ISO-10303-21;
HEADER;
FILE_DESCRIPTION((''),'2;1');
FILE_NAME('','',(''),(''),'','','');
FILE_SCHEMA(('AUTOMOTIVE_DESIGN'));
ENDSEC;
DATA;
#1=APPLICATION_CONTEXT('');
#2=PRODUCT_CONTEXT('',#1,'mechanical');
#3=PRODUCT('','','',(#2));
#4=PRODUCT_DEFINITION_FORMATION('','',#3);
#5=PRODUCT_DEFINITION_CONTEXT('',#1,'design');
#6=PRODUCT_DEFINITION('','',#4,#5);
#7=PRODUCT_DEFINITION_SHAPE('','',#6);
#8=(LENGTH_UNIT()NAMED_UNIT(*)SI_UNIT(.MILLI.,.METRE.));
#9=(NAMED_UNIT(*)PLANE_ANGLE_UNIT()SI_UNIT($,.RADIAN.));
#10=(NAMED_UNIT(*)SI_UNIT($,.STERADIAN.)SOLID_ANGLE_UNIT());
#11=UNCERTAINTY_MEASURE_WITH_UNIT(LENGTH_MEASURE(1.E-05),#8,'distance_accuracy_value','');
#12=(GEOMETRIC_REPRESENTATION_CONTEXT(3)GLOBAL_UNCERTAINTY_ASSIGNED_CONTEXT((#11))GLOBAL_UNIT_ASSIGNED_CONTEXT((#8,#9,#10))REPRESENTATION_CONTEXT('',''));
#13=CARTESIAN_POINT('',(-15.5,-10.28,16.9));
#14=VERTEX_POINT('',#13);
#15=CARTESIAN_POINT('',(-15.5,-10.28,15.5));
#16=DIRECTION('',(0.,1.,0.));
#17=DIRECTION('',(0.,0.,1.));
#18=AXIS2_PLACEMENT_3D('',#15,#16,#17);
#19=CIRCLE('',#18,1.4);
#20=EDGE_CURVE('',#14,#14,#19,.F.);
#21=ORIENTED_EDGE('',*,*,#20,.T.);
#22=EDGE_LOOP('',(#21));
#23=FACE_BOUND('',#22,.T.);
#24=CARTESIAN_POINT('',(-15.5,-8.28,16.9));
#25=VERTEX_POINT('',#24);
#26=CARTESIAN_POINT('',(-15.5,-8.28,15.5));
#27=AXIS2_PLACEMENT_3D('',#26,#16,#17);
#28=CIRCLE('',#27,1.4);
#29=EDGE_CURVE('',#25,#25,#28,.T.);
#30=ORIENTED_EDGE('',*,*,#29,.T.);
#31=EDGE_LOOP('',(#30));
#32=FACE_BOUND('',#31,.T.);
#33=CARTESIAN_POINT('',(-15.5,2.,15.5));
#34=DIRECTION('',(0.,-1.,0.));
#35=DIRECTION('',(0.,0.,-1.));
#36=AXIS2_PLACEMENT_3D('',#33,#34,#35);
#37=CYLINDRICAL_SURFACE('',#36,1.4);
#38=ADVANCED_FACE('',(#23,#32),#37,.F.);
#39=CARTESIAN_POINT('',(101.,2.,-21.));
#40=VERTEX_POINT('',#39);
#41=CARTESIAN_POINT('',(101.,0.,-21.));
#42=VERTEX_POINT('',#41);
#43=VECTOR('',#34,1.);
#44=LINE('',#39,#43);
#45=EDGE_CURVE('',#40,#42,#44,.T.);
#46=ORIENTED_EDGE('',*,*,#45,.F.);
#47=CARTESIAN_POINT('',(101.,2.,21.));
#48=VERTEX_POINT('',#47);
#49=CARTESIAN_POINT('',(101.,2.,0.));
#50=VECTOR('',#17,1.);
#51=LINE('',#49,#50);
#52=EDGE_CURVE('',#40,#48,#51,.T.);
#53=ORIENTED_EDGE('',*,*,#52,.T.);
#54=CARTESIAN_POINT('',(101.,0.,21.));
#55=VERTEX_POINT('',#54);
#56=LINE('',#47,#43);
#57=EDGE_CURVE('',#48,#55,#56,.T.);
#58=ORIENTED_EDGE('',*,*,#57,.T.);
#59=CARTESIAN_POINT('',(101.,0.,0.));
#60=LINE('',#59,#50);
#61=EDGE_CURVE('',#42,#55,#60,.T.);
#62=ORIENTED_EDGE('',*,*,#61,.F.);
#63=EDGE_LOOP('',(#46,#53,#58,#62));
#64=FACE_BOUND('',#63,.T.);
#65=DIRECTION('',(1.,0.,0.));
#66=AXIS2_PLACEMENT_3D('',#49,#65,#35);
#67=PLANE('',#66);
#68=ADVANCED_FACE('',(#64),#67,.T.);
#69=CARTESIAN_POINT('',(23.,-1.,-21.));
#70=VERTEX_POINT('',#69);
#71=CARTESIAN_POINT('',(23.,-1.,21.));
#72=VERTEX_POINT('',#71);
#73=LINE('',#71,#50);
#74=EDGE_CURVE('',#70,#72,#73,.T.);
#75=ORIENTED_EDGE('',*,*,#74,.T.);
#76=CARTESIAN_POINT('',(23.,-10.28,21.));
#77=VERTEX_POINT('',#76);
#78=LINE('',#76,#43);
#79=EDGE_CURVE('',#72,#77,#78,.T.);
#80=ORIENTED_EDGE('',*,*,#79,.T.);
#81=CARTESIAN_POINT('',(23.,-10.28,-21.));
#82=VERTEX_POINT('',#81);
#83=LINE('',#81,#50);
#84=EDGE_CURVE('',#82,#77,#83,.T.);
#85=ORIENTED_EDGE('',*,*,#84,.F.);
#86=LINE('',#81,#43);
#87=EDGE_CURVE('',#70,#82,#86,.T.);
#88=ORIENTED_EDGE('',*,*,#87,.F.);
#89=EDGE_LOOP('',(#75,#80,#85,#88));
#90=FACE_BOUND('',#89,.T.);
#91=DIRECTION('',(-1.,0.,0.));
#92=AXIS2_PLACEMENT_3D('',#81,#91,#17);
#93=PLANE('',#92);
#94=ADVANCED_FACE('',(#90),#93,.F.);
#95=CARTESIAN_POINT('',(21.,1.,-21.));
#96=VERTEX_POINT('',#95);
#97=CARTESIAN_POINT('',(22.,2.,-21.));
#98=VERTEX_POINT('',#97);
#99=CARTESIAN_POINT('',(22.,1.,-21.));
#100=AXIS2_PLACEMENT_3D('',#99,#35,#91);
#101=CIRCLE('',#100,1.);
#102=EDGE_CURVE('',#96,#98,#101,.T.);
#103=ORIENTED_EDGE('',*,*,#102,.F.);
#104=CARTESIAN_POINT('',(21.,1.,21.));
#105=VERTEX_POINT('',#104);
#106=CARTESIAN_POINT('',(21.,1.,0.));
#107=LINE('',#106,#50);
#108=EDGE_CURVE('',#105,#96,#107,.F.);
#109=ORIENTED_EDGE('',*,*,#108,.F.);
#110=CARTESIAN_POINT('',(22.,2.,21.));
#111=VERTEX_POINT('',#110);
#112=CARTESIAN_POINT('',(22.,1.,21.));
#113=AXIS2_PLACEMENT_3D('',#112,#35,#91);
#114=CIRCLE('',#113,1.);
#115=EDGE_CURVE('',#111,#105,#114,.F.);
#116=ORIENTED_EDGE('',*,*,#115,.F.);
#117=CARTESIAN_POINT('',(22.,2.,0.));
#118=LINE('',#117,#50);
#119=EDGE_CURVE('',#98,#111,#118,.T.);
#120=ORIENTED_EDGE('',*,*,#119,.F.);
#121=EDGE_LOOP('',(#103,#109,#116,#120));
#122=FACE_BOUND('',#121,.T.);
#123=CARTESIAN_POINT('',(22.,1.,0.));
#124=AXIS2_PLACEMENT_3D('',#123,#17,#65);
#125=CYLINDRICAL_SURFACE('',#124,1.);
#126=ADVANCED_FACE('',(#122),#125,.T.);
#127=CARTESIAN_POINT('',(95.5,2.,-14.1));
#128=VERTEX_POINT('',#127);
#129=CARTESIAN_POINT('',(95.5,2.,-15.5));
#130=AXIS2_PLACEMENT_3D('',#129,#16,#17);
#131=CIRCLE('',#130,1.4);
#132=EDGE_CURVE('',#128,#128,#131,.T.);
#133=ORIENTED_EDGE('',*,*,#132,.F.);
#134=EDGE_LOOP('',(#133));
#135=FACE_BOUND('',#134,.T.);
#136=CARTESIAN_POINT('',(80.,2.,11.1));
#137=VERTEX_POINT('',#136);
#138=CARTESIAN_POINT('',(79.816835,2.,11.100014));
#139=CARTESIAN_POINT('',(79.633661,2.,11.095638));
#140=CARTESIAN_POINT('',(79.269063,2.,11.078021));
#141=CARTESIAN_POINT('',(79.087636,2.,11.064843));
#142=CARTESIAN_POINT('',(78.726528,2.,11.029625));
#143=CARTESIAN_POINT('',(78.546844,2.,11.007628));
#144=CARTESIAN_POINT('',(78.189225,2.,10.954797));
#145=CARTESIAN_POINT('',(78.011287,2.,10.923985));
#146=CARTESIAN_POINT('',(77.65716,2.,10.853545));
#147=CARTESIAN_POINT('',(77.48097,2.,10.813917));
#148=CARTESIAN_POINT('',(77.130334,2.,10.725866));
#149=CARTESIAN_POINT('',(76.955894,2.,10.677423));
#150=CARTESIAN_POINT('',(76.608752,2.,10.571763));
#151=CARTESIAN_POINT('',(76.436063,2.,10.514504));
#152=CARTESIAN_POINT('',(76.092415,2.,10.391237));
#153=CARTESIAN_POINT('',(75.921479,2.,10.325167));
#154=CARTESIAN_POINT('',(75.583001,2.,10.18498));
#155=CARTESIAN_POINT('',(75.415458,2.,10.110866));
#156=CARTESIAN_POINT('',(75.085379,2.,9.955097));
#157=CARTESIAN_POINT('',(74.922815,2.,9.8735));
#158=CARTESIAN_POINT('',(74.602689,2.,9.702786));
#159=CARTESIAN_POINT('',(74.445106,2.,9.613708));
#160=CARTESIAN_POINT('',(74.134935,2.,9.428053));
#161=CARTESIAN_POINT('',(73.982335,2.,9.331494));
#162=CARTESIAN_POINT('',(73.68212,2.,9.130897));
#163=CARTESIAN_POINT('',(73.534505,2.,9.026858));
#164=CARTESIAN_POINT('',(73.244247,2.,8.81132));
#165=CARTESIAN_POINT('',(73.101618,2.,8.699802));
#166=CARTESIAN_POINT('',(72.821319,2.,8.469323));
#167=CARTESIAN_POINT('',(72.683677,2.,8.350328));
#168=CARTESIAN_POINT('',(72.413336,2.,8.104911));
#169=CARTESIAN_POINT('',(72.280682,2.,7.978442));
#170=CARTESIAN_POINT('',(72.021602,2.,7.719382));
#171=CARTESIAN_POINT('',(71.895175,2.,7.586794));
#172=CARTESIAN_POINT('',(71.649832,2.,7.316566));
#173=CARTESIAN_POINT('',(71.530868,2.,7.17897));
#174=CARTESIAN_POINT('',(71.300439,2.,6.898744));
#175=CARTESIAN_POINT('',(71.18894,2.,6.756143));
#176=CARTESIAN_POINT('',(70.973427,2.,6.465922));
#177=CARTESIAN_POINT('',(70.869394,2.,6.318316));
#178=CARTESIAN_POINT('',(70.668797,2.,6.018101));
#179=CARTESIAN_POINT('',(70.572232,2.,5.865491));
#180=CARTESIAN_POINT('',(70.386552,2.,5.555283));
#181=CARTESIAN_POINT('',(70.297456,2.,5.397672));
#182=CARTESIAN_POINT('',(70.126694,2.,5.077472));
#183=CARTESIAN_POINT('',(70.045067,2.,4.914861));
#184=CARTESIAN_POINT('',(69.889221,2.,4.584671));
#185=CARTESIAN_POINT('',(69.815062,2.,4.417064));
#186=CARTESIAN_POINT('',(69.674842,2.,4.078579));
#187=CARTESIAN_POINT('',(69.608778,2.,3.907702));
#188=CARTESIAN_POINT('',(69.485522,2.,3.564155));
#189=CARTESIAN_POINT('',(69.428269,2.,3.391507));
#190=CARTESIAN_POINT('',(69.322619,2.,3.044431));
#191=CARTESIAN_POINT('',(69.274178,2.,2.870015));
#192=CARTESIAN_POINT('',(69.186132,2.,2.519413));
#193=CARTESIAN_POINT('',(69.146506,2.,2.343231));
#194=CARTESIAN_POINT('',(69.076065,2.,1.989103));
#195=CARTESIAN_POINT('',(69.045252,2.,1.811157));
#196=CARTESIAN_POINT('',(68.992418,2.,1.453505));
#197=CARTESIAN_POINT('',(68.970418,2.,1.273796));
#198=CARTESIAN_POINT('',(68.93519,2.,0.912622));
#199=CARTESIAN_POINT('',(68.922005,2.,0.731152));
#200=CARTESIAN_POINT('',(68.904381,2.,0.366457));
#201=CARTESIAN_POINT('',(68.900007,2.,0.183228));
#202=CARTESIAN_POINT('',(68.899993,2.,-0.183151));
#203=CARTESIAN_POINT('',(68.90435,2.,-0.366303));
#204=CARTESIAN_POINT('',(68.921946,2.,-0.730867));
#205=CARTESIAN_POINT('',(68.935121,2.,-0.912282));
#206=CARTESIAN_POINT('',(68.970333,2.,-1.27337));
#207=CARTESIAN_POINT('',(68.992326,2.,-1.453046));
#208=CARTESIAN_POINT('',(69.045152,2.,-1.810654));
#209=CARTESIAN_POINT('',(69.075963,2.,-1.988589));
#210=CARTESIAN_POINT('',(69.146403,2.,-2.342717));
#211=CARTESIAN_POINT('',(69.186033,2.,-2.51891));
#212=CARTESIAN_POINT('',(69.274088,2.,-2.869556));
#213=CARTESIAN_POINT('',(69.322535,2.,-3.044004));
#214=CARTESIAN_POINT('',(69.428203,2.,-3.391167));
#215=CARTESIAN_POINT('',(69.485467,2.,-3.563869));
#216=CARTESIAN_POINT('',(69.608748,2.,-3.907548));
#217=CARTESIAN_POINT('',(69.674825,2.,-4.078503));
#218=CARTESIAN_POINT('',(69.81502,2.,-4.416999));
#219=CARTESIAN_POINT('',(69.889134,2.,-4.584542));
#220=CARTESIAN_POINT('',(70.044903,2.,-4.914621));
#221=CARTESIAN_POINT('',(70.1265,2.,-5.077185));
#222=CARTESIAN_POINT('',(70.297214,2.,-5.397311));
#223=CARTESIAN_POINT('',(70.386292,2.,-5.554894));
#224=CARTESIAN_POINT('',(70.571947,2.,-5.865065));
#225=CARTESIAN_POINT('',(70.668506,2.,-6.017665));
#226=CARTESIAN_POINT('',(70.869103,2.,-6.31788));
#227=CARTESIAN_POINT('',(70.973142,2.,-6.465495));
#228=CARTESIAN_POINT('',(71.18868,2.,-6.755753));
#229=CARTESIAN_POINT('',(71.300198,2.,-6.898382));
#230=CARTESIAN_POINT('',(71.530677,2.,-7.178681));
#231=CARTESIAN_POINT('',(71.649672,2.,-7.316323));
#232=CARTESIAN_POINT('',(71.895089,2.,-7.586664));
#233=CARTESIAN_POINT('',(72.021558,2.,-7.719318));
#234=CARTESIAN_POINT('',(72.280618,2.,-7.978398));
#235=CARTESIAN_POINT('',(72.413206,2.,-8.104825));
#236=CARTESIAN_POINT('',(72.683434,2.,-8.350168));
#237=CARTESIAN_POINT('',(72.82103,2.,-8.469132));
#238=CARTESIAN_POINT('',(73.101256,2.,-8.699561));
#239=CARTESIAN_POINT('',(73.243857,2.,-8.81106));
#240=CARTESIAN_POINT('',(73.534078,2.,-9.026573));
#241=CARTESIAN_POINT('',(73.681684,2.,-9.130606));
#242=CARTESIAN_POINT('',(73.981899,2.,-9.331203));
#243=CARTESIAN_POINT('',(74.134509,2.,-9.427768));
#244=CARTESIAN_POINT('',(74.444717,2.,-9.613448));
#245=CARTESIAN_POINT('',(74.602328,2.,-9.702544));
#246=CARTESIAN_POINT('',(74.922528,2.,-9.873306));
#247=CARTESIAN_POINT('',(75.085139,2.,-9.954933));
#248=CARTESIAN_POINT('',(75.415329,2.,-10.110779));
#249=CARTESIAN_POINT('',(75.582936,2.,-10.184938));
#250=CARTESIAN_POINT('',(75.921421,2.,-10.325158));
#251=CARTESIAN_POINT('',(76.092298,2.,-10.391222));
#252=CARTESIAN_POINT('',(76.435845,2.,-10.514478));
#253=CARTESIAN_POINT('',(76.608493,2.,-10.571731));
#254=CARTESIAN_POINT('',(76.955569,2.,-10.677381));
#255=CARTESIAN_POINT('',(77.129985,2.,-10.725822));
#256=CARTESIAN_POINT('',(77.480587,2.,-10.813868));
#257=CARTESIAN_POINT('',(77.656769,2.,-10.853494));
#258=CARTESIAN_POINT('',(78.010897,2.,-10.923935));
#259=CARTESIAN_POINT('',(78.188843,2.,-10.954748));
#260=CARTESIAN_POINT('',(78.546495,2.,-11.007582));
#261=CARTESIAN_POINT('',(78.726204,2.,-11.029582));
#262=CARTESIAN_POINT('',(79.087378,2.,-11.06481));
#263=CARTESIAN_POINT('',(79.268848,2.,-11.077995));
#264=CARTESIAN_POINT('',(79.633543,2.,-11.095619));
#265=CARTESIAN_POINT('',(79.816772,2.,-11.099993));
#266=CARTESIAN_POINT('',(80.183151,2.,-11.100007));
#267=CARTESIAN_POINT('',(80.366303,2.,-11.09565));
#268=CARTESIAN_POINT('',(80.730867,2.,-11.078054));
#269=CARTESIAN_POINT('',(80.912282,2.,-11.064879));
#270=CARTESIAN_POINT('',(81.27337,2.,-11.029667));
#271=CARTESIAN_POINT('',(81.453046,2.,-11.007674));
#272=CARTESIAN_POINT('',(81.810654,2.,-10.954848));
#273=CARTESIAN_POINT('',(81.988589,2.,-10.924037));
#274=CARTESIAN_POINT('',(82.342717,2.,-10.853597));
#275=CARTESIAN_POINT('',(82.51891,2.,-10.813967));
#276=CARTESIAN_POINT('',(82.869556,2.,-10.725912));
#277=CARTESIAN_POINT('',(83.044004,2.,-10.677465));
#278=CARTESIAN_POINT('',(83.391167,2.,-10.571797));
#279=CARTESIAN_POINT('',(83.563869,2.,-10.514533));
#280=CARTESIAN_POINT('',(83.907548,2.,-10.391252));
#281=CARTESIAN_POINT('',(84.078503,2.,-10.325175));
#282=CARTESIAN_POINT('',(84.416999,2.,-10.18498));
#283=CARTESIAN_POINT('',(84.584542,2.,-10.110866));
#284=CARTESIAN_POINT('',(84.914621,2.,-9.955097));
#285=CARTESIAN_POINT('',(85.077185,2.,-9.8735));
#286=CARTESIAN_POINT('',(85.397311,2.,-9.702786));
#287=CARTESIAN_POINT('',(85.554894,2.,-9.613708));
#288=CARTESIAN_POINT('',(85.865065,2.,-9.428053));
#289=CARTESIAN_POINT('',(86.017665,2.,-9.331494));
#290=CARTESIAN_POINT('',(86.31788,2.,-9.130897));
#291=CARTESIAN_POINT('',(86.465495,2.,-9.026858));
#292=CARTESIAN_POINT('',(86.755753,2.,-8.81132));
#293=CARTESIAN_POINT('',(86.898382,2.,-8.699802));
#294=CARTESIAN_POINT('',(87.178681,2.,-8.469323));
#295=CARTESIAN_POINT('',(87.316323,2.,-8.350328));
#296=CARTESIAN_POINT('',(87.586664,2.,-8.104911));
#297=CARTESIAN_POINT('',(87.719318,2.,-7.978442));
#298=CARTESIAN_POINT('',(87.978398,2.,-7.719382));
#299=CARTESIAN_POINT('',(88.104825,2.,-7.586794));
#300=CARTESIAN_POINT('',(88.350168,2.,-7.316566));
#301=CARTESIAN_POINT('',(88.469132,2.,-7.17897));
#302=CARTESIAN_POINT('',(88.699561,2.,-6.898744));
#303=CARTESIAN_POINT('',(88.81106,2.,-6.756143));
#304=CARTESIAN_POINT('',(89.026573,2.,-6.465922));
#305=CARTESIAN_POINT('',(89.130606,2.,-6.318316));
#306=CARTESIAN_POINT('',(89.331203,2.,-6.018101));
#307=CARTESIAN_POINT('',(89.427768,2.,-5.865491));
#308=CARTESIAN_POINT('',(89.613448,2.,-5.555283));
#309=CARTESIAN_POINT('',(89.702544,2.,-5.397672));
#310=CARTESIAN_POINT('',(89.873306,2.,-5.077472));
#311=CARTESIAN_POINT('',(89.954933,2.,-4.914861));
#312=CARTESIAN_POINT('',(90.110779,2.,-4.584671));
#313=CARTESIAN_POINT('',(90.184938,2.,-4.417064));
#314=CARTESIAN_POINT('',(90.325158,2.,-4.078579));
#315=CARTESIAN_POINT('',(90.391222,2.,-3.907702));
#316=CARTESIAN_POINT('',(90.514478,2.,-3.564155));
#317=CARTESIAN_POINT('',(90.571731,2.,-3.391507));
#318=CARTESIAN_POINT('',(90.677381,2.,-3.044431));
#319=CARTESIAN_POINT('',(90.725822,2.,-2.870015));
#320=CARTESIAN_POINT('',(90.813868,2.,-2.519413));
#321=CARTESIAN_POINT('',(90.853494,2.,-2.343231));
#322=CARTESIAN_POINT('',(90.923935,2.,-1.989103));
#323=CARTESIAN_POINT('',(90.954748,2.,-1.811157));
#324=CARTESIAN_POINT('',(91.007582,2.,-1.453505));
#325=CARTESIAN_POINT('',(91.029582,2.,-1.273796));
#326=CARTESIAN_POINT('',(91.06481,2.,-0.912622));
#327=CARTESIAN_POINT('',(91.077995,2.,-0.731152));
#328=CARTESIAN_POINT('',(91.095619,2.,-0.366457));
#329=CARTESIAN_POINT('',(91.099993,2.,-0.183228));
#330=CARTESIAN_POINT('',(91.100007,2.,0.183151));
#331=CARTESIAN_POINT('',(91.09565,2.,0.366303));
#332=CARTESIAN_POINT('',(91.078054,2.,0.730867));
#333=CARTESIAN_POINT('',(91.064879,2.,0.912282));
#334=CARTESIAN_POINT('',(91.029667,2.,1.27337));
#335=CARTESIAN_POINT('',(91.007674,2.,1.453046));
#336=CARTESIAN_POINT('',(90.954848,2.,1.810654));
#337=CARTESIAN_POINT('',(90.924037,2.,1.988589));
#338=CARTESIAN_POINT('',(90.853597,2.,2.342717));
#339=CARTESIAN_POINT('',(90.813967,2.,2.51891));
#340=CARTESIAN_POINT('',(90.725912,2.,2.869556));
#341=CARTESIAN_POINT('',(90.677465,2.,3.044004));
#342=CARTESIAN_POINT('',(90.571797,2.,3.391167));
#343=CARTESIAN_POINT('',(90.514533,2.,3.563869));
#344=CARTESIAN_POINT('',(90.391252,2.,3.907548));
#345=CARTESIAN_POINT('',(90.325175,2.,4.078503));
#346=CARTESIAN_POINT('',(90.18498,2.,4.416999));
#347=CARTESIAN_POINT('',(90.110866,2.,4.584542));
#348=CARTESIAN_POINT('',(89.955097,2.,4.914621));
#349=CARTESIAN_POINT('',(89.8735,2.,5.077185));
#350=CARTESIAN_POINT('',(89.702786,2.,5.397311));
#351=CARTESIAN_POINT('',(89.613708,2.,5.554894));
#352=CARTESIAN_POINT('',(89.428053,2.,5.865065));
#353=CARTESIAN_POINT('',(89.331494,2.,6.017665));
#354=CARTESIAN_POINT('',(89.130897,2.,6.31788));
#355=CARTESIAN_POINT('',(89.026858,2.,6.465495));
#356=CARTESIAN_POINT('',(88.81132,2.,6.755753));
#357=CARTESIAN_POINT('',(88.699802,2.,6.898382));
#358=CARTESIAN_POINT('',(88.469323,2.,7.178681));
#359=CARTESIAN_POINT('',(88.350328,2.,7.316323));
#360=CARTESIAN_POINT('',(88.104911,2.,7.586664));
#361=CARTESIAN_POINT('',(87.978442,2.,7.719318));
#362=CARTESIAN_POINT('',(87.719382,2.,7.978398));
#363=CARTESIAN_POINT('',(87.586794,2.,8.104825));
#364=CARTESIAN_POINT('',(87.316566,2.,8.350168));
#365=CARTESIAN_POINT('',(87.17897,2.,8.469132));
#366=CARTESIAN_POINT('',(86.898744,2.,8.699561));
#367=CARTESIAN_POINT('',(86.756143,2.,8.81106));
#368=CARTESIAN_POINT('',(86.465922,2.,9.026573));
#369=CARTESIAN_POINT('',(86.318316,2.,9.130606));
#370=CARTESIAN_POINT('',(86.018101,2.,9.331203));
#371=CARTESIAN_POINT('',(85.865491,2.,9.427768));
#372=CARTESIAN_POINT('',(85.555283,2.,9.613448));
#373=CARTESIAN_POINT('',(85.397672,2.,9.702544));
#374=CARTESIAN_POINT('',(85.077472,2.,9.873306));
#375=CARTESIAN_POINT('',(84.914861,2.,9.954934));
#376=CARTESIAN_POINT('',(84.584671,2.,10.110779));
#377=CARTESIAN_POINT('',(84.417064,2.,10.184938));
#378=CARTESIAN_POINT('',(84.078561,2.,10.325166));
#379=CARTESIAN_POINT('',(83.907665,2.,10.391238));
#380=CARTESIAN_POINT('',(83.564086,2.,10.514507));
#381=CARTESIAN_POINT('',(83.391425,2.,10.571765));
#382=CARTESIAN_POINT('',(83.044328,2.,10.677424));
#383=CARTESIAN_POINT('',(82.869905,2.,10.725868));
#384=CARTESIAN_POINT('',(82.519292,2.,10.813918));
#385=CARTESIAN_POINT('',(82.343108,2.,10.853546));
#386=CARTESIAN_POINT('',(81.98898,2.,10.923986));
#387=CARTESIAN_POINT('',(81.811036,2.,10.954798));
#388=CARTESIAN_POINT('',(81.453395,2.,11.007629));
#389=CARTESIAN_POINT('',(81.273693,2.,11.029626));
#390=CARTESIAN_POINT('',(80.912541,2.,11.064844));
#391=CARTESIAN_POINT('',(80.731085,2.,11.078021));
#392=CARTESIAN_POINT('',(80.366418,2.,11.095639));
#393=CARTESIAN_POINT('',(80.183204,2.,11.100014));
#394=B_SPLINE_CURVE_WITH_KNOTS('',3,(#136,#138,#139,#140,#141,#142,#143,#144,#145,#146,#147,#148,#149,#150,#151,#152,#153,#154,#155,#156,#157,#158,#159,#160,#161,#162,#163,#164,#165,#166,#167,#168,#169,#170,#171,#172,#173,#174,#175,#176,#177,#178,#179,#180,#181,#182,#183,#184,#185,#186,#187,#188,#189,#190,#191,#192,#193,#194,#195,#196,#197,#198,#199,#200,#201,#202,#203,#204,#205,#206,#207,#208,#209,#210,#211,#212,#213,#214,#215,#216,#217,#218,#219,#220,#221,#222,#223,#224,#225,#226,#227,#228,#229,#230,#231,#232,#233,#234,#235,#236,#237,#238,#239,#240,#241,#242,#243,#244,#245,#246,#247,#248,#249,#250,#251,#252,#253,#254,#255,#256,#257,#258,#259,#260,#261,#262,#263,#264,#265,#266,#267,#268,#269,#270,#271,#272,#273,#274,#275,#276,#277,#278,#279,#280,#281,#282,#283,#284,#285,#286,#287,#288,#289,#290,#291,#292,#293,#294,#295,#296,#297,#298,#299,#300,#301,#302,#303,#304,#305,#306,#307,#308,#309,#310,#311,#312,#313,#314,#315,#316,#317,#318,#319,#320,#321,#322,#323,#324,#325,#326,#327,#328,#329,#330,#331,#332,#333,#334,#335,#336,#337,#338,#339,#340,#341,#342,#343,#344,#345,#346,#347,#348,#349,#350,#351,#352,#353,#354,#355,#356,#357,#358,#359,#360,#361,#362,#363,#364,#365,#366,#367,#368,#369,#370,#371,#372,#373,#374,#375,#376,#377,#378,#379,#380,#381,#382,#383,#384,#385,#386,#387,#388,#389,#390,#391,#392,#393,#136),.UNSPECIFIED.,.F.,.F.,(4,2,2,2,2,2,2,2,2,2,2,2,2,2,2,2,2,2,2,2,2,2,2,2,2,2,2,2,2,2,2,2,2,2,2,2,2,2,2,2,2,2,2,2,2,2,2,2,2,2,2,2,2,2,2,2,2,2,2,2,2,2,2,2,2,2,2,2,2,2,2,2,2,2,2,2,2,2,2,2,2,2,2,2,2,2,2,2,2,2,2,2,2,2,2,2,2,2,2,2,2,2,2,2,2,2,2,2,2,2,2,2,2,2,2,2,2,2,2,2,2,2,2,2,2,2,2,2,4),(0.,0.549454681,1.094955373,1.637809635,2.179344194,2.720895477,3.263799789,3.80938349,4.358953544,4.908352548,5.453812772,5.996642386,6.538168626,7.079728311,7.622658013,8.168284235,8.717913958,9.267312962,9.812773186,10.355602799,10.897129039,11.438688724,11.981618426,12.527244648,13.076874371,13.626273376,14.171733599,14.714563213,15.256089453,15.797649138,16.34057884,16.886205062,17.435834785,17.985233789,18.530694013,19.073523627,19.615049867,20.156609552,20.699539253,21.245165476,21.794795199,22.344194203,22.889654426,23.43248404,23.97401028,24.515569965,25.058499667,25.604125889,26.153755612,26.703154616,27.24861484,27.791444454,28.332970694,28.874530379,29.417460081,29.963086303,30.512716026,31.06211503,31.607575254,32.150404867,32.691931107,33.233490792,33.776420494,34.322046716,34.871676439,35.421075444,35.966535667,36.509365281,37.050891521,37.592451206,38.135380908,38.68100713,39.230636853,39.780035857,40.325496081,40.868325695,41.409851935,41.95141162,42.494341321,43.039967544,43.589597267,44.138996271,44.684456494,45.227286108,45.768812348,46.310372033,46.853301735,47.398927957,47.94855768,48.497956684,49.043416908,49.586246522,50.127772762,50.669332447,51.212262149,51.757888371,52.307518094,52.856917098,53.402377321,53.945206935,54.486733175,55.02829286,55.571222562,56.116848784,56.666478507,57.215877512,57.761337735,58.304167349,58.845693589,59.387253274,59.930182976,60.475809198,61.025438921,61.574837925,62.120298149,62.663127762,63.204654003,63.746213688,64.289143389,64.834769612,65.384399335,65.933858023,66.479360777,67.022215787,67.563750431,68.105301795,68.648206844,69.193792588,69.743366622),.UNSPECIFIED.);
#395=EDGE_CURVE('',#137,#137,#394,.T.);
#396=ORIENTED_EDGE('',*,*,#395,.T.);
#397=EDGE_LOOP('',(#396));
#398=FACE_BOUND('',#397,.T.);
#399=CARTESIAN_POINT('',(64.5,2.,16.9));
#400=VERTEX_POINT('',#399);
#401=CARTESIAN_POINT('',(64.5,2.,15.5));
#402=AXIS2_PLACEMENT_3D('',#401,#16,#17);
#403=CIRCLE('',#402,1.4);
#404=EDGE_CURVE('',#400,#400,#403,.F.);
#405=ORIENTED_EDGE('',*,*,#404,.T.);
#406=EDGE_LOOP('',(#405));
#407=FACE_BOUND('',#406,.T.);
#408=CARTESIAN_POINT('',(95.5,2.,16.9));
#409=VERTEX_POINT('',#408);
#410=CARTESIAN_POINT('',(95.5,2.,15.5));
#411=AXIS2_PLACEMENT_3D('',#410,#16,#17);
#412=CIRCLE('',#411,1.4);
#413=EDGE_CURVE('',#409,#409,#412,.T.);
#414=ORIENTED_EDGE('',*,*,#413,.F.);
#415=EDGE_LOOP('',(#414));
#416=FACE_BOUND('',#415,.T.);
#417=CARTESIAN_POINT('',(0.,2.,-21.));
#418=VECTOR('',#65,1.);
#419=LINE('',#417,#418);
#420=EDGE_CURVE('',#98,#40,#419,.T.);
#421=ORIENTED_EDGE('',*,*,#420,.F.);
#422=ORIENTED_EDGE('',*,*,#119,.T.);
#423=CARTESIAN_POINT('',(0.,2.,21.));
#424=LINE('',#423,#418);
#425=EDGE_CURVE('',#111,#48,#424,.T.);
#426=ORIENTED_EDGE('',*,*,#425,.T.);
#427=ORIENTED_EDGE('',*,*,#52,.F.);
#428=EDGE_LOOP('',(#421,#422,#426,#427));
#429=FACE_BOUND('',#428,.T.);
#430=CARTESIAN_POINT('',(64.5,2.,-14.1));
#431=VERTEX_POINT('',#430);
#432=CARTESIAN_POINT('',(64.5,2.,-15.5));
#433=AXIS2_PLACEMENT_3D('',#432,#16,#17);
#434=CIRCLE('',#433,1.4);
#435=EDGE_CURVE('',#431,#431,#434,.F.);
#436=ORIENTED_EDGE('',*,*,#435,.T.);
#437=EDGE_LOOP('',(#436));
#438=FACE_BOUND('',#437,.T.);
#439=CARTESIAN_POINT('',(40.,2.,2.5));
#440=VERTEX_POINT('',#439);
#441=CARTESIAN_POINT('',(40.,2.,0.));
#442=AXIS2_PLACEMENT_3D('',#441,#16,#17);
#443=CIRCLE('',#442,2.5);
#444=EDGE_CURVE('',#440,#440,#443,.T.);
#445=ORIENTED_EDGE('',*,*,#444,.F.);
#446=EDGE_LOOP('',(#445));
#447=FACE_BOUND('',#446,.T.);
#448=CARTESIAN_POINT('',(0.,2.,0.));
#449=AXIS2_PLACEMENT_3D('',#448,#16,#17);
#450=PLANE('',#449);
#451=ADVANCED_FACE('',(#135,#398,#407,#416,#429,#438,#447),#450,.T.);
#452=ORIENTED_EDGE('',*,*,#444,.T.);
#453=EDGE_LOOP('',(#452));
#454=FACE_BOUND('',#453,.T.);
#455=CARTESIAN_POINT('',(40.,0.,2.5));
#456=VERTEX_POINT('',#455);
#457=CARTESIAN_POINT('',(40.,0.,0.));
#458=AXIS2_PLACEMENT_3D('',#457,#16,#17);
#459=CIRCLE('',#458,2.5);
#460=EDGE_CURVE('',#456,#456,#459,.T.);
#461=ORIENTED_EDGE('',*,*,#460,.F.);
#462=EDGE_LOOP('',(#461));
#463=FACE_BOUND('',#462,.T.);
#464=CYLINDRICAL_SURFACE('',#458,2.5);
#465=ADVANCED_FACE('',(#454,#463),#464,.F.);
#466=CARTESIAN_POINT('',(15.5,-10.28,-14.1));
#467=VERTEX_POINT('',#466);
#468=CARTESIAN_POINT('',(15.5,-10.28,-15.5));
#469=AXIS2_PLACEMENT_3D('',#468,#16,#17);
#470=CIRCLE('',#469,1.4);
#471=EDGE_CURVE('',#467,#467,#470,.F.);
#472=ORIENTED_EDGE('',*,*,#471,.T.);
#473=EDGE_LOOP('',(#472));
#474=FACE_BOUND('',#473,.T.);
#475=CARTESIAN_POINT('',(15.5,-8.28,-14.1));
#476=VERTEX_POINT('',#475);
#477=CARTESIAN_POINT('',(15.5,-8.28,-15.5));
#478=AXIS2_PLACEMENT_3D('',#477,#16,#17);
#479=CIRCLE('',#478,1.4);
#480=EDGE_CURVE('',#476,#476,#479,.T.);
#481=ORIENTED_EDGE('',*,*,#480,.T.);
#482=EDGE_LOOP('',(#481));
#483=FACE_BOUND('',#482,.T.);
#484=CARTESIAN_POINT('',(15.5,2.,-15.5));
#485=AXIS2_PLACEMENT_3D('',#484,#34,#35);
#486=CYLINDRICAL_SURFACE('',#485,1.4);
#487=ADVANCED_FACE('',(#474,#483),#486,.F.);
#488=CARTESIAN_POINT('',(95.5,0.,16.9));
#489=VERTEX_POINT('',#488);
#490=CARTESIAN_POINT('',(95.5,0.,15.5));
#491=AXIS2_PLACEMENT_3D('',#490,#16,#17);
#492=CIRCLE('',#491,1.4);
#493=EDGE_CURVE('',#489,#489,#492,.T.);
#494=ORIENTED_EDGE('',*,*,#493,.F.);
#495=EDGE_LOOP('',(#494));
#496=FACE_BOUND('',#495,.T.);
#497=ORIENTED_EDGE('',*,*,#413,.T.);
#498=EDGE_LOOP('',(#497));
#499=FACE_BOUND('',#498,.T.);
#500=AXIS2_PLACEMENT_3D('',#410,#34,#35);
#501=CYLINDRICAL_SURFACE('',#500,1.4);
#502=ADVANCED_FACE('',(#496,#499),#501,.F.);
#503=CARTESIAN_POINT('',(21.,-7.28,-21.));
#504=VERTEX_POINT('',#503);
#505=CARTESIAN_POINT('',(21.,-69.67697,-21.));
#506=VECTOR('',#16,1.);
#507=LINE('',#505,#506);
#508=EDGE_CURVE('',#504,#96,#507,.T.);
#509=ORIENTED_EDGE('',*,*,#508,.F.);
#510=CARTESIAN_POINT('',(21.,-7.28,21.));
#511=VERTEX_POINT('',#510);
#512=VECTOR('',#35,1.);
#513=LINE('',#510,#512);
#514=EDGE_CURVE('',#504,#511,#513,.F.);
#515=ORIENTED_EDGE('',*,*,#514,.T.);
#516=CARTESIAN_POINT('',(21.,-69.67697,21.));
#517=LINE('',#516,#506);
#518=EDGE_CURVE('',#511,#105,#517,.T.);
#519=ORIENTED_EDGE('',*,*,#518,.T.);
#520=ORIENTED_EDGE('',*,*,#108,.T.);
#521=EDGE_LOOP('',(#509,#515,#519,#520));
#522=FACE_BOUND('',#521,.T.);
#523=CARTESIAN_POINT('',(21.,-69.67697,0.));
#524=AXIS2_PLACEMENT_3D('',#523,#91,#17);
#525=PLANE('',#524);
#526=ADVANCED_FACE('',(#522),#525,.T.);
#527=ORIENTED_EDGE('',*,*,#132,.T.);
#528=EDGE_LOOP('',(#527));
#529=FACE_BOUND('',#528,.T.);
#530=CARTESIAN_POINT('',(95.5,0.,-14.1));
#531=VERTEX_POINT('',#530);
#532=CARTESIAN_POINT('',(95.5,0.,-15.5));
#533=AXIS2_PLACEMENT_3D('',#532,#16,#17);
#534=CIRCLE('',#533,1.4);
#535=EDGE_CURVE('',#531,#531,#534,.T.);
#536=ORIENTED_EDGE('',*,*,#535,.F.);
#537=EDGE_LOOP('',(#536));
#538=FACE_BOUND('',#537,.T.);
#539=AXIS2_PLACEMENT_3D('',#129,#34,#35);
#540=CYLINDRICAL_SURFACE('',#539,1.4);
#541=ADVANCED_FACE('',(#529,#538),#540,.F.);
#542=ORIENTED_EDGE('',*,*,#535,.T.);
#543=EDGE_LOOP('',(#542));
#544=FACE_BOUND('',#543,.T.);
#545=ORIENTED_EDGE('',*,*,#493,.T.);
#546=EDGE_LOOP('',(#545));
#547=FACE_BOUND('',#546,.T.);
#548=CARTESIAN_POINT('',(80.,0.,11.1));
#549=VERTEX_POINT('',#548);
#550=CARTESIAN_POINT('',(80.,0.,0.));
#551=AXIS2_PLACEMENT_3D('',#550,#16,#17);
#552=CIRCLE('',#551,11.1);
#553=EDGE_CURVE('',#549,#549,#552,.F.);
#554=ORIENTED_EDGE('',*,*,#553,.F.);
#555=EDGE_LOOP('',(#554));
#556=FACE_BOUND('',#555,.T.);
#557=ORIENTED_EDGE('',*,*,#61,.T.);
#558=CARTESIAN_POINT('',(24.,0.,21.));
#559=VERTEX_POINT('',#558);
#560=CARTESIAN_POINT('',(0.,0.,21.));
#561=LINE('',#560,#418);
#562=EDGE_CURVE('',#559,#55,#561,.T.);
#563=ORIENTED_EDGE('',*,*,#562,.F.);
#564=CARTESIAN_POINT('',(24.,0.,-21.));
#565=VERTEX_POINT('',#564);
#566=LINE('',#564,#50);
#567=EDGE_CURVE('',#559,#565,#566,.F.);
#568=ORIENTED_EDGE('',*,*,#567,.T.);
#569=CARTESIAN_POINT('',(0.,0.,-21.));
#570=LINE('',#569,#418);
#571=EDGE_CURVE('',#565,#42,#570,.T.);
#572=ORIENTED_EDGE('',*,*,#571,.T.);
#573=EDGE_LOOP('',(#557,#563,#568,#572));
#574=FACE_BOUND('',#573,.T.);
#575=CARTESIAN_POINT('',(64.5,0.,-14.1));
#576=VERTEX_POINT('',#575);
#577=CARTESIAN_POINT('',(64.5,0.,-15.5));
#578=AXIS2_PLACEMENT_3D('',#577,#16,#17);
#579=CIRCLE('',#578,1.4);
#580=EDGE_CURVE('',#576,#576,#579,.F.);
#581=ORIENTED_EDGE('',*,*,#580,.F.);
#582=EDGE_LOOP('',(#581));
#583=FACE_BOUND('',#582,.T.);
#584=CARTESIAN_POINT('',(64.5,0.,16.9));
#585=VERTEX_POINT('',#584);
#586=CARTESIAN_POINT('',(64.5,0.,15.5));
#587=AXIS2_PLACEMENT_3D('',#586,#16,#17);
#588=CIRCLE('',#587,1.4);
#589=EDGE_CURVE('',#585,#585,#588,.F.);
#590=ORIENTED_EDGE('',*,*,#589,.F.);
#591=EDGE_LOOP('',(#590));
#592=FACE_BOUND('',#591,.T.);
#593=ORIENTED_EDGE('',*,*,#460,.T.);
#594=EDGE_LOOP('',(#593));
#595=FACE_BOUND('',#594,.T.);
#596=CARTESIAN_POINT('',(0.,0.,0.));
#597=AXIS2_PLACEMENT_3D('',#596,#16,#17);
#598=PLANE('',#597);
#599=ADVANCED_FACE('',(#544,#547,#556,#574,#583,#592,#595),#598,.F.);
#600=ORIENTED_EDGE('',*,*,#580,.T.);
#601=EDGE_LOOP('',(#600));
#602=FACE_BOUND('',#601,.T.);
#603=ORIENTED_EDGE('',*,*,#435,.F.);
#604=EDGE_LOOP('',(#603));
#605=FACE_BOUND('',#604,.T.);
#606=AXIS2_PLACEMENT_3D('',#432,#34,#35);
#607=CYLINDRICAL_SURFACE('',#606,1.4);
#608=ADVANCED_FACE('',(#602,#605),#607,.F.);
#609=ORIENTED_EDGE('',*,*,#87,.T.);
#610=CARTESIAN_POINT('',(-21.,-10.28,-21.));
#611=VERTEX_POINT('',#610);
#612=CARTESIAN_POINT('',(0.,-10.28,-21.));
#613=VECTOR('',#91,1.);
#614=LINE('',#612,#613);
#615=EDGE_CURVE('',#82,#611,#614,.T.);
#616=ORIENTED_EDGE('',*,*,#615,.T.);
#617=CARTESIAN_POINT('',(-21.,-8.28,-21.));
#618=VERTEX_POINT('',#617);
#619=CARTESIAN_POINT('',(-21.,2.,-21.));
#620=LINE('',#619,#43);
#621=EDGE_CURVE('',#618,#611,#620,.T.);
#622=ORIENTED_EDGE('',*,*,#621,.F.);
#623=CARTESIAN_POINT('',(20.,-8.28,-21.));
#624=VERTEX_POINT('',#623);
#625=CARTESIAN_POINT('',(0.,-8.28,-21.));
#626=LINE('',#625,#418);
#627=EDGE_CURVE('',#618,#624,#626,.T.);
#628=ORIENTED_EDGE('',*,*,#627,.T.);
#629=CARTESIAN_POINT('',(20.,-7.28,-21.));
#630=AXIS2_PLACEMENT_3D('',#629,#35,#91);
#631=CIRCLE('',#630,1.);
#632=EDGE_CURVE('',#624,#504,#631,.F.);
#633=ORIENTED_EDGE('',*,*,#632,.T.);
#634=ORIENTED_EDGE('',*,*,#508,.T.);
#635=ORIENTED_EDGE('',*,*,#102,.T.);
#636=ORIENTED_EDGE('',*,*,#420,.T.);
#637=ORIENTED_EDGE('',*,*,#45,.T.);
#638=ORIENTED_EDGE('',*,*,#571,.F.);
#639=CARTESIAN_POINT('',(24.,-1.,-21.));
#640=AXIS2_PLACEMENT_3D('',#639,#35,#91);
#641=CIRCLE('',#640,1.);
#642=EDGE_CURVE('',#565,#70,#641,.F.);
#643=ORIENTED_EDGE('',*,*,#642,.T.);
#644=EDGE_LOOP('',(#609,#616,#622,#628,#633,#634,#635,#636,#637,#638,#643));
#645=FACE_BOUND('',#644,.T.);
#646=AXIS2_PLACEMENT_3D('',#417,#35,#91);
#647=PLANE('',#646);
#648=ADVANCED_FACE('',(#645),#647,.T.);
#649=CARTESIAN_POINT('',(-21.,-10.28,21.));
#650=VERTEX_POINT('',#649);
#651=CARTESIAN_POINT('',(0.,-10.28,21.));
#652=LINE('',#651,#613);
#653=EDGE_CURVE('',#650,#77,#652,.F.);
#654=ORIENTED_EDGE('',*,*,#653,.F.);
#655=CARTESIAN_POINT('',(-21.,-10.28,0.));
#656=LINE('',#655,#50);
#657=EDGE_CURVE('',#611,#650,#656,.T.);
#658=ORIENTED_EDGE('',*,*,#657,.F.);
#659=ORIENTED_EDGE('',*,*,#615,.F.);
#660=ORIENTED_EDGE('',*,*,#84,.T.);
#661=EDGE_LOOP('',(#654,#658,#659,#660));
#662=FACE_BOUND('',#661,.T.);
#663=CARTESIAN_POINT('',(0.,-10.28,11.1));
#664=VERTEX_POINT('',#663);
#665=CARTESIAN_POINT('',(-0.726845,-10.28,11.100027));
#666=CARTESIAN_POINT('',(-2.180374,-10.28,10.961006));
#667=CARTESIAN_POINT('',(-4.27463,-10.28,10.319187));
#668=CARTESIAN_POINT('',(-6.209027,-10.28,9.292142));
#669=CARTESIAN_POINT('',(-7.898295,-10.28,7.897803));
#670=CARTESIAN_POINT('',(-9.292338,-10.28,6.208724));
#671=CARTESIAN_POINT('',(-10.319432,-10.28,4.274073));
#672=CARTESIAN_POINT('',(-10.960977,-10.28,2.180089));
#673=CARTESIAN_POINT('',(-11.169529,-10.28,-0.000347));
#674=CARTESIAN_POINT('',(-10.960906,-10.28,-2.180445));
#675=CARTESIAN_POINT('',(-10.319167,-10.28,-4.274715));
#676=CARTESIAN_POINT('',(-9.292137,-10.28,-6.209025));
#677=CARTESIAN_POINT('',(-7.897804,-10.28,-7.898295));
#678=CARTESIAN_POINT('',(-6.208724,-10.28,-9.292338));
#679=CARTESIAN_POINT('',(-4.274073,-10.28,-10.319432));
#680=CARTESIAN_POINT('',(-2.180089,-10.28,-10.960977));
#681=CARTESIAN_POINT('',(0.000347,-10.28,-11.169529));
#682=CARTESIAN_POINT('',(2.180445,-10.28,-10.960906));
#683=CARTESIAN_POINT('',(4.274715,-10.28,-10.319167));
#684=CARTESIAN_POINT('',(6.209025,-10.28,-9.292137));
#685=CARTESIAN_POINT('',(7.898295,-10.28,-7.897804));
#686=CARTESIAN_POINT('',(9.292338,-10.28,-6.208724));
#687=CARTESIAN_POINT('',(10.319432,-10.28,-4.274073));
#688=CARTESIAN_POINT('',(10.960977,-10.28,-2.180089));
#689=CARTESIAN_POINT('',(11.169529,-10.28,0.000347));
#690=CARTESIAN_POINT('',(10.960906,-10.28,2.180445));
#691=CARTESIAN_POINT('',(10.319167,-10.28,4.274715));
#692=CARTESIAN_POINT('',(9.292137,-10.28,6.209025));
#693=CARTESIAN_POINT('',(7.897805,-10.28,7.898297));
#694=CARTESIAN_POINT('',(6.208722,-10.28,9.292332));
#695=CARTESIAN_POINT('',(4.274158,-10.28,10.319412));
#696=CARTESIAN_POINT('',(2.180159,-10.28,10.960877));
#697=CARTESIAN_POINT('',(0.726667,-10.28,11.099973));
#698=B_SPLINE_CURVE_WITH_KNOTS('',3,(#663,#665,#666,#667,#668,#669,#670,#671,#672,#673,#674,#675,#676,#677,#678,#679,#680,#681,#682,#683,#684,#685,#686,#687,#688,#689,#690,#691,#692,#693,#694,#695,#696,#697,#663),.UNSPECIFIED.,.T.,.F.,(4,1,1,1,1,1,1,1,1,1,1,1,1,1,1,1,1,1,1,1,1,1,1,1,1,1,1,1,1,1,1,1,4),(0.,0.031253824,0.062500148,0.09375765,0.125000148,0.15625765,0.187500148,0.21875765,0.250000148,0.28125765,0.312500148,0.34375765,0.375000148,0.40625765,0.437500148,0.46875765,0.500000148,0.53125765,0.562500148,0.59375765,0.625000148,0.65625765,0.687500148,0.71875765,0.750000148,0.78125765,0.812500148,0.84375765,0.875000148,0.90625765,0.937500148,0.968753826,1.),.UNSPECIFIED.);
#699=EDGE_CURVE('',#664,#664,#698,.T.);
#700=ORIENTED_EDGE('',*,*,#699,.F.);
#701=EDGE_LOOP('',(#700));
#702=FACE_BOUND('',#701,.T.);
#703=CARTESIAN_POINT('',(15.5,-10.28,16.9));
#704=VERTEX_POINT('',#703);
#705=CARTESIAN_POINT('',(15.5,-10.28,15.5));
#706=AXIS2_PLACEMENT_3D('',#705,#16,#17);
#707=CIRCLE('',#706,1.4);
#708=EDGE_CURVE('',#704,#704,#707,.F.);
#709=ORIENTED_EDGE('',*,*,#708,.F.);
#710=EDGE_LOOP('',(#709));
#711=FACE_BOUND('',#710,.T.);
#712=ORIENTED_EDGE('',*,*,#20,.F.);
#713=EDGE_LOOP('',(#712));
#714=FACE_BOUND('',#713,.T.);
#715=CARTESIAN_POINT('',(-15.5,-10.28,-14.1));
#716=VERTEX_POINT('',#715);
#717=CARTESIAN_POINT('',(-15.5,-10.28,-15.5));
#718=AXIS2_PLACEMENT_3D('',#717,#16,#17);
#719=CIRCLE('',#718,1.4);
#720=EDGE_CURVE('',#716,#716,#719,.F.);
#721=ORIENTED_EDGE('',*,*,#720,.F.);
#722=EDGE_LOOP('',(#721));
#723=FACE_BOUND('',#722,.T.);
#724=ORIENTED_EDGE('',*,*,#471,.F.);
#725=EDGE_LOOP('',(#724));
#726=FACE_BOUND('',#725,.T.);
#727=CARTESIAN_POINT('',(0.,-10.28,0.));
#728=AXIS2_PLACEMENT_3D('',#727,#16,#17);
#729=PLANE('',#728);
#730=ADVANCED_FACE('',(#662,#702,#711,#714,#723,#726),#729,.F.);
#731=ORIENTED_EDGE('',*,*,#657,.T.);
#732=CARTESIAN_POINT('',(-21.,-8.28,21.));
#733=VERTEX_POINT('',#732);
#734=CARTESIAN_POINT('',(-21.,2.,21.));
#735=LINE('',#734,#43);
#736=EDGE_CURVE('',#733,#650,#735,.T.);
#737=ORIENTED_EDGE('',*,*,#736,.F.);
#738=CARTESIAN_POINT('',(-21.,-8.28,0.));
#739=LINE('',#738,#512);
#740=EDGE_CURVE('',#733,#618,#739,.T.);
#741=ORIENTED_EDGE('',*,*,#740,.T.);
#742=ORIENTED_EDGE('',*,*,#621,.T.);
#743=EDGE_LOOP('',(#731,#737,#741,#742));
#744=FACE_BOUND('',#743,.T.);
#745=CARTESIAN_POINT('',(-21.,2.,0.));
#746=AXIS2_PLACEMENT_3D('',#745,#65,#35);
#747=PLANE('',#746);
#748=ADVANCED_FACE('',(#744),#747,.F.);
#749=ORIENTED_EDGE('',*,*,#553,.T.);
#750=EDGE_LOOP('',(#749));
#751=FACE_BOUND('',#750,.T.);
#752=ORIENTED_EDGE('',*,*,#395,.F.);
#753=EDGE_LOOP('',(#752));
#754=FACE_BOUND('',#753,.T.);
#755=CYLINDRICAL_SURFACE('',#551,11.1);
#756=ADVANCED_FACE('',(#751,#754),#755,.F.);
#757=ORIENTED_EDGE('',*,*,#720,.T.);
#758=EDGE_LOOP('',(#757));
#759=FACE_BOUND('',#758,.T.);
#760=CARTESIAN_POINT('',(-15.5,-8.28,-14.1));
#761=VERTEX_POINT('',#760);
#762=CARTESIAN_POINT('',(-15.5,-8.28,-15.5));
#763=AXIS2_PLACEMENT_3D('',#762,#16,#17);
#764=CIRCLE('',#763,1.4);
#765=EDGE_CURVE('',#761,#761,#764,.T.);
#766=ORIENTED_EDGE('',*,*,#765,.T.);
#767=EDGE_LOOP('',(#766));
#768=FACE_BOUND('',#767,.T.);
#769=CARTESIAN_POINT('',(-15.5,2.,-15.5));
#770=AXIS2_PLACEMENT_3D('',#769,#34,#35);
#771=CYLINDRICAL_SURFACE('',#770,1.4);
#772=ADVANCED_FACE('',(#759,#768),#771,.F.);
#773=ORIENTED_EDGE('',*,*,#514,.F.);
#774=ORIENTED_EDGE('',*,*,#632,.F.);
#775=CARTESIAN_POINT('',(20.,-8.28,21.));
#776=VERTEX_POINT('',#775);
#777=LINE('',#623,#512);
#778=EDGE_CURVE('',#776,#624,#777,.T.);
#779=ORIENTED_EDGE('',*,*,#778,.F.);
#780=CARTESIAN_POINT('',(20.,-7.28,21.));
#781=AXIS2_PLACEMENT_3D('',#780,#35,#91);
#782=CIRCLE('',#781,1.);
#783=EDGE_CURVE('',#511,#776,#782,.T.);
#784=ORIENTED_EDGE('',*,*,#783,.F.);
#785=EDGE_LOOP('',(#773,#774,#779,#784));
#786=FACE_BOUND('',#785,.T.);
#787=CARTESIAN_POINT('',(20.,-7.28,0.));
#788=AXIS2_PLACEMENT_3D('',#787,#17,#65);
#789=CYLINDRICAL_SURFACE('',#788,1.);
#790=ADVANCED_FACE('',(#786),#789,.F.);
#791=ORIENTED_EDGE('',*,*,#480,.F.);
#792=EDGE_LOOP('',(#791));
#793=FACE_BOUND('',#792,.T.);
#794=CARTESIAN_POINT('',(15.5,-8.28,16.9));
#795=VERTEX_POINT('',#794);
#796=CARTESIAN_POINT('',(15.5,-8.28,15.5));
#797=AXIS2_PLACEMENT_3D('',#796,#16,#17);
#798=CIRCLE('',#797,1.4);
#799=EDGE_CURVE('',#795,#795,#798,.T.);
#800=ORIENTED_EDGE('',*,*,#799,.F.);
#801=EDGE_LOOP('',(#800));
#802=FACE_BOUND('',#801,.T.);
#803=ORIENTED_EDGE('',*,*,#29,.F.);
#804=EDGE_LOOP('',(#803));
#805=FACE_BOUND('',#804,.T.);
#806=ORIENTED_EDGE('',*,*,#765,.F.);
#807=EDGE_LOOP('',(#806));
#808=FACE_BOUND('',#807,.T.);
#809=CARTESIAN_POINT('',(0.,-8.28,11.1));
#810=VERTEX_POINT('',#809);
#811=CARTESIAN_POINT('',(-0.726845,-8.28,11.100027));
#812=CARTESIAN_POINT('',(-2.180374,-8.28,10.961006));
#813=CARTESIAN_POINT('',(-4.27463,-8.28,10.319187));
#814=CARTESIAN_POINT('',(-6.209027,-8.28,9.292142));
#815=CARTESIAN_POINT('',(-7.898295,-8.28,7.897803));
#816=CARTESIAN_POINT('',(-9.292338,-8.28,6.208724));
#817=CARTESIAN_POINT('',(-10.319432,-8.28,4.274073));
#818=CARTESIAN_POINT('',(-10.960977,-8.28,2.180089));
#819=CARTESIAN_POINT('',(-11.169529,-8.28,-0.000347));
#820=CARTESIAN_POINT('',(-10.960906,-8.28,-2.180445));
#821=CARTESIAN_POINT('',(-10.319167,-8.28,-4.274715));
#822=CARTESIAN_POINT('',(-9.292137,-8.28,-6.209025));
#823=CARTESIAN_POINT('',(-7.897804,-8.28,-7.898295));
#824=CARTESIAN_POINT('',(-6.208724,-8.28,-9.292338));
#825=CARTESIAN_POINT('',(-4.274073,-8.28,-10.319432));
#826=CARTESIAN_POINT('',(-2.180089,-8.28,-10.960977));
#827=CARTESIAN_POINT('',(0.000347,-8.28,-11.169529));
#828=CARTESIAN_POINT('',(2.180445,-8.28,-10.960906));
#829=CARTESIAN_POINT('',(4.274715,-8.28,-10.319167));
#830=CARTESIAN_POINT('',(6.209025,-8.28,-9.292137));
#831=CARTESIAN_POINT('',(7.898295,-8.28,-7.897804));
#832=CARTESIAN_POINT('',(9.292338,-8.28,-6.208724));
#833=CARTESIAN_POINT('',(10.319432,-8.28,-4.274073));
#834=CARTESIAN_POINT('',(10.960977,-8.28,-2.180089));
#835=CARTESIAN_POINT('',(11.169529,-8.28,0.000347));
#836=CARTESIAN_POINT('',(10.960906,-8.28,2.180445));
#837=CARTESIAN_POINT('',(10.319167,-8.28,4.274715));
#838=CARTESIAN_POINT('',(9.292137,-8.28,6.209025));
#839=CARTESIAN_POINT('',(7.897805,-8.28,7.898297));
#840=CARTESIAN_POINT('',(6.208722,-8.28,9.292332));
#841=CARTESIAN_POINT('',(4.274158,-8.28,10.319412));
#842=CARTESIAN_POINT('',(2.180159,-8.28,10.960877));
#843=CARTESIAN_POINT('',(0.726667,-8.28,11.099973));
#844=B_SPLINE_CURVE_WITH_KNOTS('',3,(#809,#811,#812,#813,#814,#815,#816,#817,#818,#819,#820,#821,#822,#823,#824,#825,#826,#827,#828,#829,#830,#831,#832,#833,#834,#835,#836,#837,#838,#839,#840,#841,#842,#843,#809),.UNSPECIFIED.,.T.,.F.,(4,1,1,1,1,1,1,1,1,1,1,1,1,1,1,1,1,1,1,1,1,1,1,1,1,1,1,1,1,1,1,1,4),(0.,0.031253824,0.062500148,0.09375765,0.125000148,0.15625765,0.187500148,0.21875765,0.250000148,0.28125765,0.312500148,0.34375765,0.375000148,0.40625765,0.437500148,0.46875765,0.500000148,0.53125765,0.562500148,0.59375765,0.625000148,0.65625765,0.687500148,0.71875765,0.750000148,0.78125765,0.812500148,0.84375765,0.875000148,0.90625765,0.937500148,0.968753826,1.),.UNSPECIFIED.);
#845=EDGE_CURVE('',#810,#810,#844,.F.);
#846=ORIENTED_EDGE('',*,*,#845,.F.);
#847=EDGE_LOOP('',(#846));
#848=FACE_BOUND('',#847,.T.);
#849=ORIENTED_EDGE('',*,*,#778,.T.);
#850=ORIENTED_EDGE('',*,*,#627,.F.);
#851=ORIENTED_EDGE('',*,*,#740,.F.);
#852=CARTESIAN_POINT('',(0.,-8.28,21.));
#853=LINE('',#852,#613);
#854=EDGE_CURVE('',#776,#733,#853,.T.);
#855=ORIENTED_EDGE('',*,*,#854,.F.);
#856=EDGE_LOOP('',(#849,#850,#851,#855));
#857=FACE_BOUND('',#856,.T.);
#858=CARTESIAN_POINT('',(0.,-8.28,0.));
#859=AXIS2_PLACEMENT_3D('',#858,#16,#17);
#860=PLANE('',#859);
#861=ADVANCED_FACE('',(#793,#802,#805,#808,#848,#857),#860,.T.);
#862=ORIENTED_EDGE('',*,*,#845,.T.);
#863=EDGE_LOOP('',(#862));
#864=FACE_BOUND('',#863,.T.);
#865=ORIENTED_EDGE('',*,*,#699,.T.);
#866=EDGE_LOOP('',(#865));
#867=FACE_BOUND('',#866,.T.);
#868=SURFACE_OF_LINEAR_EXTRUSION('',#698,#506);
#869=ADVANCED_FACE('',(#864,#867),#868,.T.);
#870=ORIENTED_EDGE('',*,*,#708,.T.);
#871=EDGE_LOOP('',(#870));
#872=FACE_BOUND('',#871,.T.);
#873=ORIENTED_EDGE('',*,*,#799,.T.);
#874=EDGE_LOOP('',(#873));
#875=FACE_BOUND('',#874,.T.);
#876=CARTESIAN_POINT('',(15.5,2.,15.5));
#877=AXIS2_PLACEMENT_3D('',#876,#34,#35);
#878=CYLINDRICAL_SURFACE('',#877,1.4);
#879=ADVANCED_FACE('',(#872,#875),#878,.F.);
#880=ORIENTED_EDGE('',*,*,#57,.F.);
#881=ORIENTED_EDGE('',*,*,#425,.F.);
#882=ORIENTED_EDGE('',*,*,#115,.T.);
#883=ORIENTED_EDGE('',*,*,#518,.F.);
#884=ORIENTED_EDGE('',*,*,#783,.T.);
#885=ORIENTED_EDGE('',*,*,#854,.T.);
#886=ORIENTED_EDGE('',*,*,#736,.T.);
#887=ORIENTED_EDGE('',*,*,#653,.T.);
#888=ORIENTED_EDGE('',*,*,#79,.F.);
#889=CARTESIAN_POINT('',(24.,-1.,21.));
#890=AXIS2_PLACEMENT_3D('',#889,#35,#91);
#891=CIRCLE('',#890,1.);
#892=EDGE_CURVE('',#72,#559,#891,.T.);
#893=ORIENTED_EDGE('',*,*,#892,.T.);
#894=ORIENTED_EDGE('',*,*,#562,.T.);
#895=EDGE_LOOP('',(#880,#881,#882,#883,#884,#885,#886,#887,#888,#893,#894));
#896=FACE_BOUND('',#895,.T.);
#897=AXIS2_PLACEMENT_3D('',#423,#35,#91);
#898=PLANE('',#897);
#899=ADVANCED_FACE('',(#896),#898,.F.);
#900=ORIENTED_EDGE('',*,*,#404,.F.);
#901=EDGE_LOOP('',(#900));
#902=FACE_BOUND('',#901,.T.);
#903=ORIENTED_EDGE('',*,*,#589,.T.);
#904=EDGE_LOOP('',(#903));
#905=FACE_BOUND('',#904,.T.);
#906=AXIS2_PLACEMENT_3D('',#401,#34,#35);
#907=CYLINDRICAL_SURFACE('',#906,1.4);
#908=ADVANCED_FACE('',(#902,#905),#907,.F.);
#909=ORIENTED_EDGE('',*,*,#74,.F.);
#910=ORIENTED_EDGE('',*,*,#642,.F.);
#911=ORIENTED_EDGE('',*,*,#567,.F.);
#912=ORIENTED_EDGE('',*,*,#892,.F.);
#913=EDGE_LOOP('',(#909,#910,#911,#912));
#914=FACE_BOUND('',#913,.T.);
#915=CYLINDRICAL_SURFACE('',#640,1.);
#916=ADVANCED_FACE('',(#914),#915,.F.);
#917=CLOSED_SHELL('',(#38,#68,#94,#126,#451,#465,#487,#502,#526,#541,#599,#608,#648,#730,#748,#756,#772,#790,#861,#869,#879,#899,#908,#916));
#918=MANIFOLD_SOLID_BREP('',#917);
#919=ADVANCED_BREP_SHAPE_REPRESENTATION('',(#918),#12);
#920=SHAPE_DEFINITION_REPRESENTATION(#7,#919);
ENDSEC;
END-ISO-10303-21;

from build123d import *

# Parameters (mm, degrees)
SKETCH1_W               = 38
SKETCH1_H               = 21
SKETCH1_R               = 1.4
BOSS_EXTRUDE1_DEPTH     = 2
CUT_EXTRUDE1_DEPTH      = 104.179455
CUT_EXTRUDE1_DEPTH_BACK = 104.179455
SKETCH3_R               = 11.1
CUT_EXTRUDE2_DEPTH      = 104.179455
CUT_EXTRUDE2_DEPTH_BACK = 104.179455
SKETCH4_R               = 2.5
BOSS_EXTRUDE2_START     = -12.28
BOSS_EXTRUDE2_OUTLINE_R = 1.4
BOSS_EXTRUDE2_DEPTH     = 10.28
CUT_EXTRUDE3_START      = -10.28
SKETCH6_W               = 42
SKETCH6_H               = 42
SKETCH6_R               = 1.4
CUT_EXTRUDE3_DEPTH      = 10.28
CUT_EXTRUDE4_DEPTH      = 110.866639
CUT_EXTRUDE4_DEPTH_BACK = 110.866639
SKETCH7_W               = 17
SKETCH7_H               = 10.28
FILLET1_R               = 1


# Read off the part's stored shape, not the designer's step: Boss-Extrude2
with BuildPart() as part:
    # Sketch1 → Boss-Extrude1 (new body)
    # profile 1 of 4: a face of its own
    with BuildSketch(Plane(origin=(0, 0, 0), x_dir=(1, 0, 0), z_dir=(0, 1, 0))):
        with Locations((40, 10.5)):
            Rectangle(SKETCH1_W, SKETCH1_H)
    # profile 2 of 4: a face of its own
    with BuildSketch(Plane(origin=(0, 0, 0), x_dir=(1, 0, 0), z_dir=(0, 1, 0))):
        Polygon((21, -21), (21, 0), (21, 21), (-21, 21), (-21, -21), align=None)
        with Locations(Location((-15.5, -15.5, 0), (0, 0, 270))):
            Circle(SKETCH1_R, mode=Mode.SUBTRACT)
        with Locations(Location((15.5, -15.5, 0), (0, 0, 270))):
            Circle(SKETCH1_R, mode=Mode.SUBTRACT)
        with Locations(Location((-15.5, 15.5, 0), (0, 0, 270))):
            Circle(SKETCH1_R, mode=Mode.SUBTRACT)
        with Locations(Location((15.5, 15.5, 0), (0, 0, 270))):
            Circle(SKETCH1_R, mode=Mode.SUBTRACT)
    # profile 3 of 4: a face of its own
    with BuildSketch(Plane(origin=(0, 0, 0), x_dir=(1, 0, 0), z_dir=(0, 1, 0))):
        with Locations((40, -10.5)):
            Rectangle(SKETCH1_W, SKETCH1_H)
    # profile 4 of 4: a face of its own
    with BuildSketch(Plane(origin=(0, 0, 0), x_dir=(1, 0, 0), z_dir=(0, 1, 0))):
        Polygon((59, 21), (59, 0), (59, -21), (101, -21), (101, 21), align=None)
        with Locations(Location((64.5, -15.5, 0), (0, 0, 270))):
            Circle(SKETCH1_R, mode=Mode.SUBTRACT)
        with Locations(Location((95.5, -15.5, 0), (0, 0, 270))):
            Circle(SKETCH1_R, mode=Mode.SUBTRACT)
        with Locations(Location((64.5, 15.5, 0), (0, 0, 270))):
            Circle(SKETCH1_R, mode=Mode.SUBTRACT)
        with Locations(Location((95.5, 15.5, 0), (0, 0, 270))):
            Circle(SKETCH1_R, mode=Mode.SUBTRACT)
    extrude(amount=BOSS_EXTRUDE1_DEPTH)

    # Sketch3 → Cut-Extrude1 (cut, two sides: drawn at the far end of the back side and taken through both)
    with BuildSketch(Plane(origin=(0, 2, 0), x_dir=(1, 0, 0), z_dir=(0, 1, 0)).offset(-CUT_EXTRUDE1_DEPTH_BACK)):
        with Locations(Location((80, 0, 0), (0, 0, 270))):
            Circle(SKETCH3_R)
        with Locations(Location((0, 0, 0), (0, 0, 270))):
            Circle(SKETCH3_R)
    extrude(amount=CUT_EXTRUDE1_DEPTH + CUT_EXTRUDE1_DEPTH_BACK, mode=Mode.SUBTRACT)

    # Sketch4 → Cut-Extrude2 (cut, two sides: drawn at the far end of the back side and taken through both)
    with BuildSketch(Plane(origin=(0, 2, 0), x_dir=(1, 0, 0), z_dir=(0, 1, 0)).offset(-CUT_EXTRUDE2_DEPTH_BACK)):
        with Locations(Location((40, 0, 0), (0, 0, 270))):
            Circle(SKETCH4_R)
    extrude(amount=CUT_EXTRUDE2_DEPTH + CUT_EXTRUDE2_DEPTH_BACK, mode=Mode.SUBTRACT)


with BuildPart() as boss_extrude2_tool:
    # Boss-Extrude2 outline → Boss-Extrude2 (new body)
    with BuildSketch(Plane(origin=(0, 2, 0), x_dir=(1, 0, 0), z_dir=(0, 1, 0)).offset(BOSS_EXTRUDE2_START)):
        with BuildLine():
            Line((-21, -21), (40, -21))
            Line((40, -21), (40, -2.5))
            ThreePointArc((40, -2.5), (37.5, 0), (40, 2.5))
            Line((40, 2.5), (40, 21))
            Line((40, 21), (-21, 21))
            Line((-21, 21), (-21, -21))
        make_face()
        with Locations((-15.5, -15.5)):
            Circle(BOSS_EXTRUDE2_OUTLINE_R, mode=Mode.SUBTRACT)
        with Locations((15.5, -15.5)):
            Circle(BOSS_EXTRUDE2_OUTLINE_R, mode=Mode.SUBTRACT)
        with BuildLine():
            add(Edge.make_bspline(
                [(0, -11.1), (-0.726845, -11.100027), (-2.180374, -10.961006), (-4.27463, -10.319187), (-6.209027, -9.292142), (-7.898295, -7.897803), (-9.292338, -6.208724), (-10.319432, -4.274073), (-10.960977, -2.180089), (-11.169529, 0.000347), (-10.960906, 2.180445), (-10.319167, 4.274715), (-9.292137, 6.209025), (-7.897804, 7.898295), (-6.208724, 9.292338), (-4.274073, 10.319432), (-2.180089, 10.960977), (0.000347, 11.169529), (2.180445, 10.960906), (4.274715, 10.319167), (6.209025, 9.292137), (7.898295, 7.897804), (9.292338, 6.208724), (10.319432, 4.274073), (10.960977, 2.180089), (11.169529, -0.000347), (10.960906, -2.180445), (10.319167, -4.274715), (9.292137, -6.209025), (7.897805, -7.898297), (6.208722, -9.292332), (4.274158, -10.319412), (2.180159, -10.960877), (0.726667, -11.099973), (0, -11.1)],
                knots=[0, 0, 0, 0, 0.031254, 0.0625, 0.093758, 0.125, 0.156258, 0.1875, 0.218758, 0.25, 0.281258, 0.3125, 0.343758, 0.375, 0.406258, 0.4375, 0.468758, 0.5, 0.531258, 0.5625, 0.593758, 0.625, 0.656258, 0.6875, 0.718758, 0.75, 0.781258, 0.8125, 0.843758, 0.875, 0.906258, 0.9375, 0.968754, 1, 1, 1, 1], degree=3))
        make_face(mode=Mode.SUBTRACT)
        with Locations((-15.5, 15.5)):
            Circle(BOSS_EXTRUDE2_OUTLINE_R, mode=Mode.SUBTRACT)
        with Locations((15.5, 15.5)):
            Circle(BOSS_EXTRUDE2_OUTLINE_R, mode=Mode.SUBTRACT)
    extrude(amount=BOSS_EXTRUDE2_DEPTH)


with BuildPart() as part_1:
    add(part.part)


with BuildPart() as part_2:
    # Boss-Extrude2: joined with boss_extrude2_tool
    add(part_1.part.fuse(boss_extrude2_tool.part, tol=0.00001))

    # Sketch6 → Cut-Extrude3 (cut)
    with BuildSketch(Plane(origin=(0, 2, 0), x_dir=(1, 0, 0), z_dir=(0, 1, 0)).offset(CUT_EXTRUDE3_START)):
        Rectangle(SKETCH6_W, SKETCH6_H)
        with Locations(Location((15.5, 15.5, 0), (0, 0, 270))):
            Circle(SKETCH6_R, mode=Mode.SUBTRACT)
        with Locations(Location((-15.5, 15.5, 0), (0, 0, 270))):
            Circle(SKETCH6_R, mode=Mode.SUBTRACT)
        with Locations(Location((-15.5, -15.5, 0), (0, 0, 270))):
            Circle(SKETCH6_R, mode=Mode.SUBTRACT)
        with Locations(Location((15.5, -15.5, 0), (0, 0, 270))):
            Circle(SKETCH6_R, mode=Mode.SUBTRACT)
    extrude(amount=CUT_EXTRUDE3_DEPTH, mode=Mode.SUBTRACT)

    # Sketch7 → Cut-Extrude4 (cut, two sides: drawn at the far end of the back side and taken through both)
    with BuildSketch(Plane.XY.offset(21).offset(-CUT_EXTRUDE4_DEPTH_BACK)):
        with Locations((31.5, -5.14)):
            Rectangle(SKETCH7_W, SKETCH7_H)
    extrude(amount=CUT_EXTRUDE4_DEPTH + CUT_EXTRUDE4_DEPTH_BACK, mode=Mode.SUBTRACT)

    # Fillet1
    fillet1_edges = [part_2.edges().sort_by_distance(p)[0] for p in [
        (21, -8.28, 0),
        (21, 2, 0),
        (23, 0, 0),
    ]]
    fillet(fillet1_edges, radius=FILLET1_R)


solid = part_2.part
